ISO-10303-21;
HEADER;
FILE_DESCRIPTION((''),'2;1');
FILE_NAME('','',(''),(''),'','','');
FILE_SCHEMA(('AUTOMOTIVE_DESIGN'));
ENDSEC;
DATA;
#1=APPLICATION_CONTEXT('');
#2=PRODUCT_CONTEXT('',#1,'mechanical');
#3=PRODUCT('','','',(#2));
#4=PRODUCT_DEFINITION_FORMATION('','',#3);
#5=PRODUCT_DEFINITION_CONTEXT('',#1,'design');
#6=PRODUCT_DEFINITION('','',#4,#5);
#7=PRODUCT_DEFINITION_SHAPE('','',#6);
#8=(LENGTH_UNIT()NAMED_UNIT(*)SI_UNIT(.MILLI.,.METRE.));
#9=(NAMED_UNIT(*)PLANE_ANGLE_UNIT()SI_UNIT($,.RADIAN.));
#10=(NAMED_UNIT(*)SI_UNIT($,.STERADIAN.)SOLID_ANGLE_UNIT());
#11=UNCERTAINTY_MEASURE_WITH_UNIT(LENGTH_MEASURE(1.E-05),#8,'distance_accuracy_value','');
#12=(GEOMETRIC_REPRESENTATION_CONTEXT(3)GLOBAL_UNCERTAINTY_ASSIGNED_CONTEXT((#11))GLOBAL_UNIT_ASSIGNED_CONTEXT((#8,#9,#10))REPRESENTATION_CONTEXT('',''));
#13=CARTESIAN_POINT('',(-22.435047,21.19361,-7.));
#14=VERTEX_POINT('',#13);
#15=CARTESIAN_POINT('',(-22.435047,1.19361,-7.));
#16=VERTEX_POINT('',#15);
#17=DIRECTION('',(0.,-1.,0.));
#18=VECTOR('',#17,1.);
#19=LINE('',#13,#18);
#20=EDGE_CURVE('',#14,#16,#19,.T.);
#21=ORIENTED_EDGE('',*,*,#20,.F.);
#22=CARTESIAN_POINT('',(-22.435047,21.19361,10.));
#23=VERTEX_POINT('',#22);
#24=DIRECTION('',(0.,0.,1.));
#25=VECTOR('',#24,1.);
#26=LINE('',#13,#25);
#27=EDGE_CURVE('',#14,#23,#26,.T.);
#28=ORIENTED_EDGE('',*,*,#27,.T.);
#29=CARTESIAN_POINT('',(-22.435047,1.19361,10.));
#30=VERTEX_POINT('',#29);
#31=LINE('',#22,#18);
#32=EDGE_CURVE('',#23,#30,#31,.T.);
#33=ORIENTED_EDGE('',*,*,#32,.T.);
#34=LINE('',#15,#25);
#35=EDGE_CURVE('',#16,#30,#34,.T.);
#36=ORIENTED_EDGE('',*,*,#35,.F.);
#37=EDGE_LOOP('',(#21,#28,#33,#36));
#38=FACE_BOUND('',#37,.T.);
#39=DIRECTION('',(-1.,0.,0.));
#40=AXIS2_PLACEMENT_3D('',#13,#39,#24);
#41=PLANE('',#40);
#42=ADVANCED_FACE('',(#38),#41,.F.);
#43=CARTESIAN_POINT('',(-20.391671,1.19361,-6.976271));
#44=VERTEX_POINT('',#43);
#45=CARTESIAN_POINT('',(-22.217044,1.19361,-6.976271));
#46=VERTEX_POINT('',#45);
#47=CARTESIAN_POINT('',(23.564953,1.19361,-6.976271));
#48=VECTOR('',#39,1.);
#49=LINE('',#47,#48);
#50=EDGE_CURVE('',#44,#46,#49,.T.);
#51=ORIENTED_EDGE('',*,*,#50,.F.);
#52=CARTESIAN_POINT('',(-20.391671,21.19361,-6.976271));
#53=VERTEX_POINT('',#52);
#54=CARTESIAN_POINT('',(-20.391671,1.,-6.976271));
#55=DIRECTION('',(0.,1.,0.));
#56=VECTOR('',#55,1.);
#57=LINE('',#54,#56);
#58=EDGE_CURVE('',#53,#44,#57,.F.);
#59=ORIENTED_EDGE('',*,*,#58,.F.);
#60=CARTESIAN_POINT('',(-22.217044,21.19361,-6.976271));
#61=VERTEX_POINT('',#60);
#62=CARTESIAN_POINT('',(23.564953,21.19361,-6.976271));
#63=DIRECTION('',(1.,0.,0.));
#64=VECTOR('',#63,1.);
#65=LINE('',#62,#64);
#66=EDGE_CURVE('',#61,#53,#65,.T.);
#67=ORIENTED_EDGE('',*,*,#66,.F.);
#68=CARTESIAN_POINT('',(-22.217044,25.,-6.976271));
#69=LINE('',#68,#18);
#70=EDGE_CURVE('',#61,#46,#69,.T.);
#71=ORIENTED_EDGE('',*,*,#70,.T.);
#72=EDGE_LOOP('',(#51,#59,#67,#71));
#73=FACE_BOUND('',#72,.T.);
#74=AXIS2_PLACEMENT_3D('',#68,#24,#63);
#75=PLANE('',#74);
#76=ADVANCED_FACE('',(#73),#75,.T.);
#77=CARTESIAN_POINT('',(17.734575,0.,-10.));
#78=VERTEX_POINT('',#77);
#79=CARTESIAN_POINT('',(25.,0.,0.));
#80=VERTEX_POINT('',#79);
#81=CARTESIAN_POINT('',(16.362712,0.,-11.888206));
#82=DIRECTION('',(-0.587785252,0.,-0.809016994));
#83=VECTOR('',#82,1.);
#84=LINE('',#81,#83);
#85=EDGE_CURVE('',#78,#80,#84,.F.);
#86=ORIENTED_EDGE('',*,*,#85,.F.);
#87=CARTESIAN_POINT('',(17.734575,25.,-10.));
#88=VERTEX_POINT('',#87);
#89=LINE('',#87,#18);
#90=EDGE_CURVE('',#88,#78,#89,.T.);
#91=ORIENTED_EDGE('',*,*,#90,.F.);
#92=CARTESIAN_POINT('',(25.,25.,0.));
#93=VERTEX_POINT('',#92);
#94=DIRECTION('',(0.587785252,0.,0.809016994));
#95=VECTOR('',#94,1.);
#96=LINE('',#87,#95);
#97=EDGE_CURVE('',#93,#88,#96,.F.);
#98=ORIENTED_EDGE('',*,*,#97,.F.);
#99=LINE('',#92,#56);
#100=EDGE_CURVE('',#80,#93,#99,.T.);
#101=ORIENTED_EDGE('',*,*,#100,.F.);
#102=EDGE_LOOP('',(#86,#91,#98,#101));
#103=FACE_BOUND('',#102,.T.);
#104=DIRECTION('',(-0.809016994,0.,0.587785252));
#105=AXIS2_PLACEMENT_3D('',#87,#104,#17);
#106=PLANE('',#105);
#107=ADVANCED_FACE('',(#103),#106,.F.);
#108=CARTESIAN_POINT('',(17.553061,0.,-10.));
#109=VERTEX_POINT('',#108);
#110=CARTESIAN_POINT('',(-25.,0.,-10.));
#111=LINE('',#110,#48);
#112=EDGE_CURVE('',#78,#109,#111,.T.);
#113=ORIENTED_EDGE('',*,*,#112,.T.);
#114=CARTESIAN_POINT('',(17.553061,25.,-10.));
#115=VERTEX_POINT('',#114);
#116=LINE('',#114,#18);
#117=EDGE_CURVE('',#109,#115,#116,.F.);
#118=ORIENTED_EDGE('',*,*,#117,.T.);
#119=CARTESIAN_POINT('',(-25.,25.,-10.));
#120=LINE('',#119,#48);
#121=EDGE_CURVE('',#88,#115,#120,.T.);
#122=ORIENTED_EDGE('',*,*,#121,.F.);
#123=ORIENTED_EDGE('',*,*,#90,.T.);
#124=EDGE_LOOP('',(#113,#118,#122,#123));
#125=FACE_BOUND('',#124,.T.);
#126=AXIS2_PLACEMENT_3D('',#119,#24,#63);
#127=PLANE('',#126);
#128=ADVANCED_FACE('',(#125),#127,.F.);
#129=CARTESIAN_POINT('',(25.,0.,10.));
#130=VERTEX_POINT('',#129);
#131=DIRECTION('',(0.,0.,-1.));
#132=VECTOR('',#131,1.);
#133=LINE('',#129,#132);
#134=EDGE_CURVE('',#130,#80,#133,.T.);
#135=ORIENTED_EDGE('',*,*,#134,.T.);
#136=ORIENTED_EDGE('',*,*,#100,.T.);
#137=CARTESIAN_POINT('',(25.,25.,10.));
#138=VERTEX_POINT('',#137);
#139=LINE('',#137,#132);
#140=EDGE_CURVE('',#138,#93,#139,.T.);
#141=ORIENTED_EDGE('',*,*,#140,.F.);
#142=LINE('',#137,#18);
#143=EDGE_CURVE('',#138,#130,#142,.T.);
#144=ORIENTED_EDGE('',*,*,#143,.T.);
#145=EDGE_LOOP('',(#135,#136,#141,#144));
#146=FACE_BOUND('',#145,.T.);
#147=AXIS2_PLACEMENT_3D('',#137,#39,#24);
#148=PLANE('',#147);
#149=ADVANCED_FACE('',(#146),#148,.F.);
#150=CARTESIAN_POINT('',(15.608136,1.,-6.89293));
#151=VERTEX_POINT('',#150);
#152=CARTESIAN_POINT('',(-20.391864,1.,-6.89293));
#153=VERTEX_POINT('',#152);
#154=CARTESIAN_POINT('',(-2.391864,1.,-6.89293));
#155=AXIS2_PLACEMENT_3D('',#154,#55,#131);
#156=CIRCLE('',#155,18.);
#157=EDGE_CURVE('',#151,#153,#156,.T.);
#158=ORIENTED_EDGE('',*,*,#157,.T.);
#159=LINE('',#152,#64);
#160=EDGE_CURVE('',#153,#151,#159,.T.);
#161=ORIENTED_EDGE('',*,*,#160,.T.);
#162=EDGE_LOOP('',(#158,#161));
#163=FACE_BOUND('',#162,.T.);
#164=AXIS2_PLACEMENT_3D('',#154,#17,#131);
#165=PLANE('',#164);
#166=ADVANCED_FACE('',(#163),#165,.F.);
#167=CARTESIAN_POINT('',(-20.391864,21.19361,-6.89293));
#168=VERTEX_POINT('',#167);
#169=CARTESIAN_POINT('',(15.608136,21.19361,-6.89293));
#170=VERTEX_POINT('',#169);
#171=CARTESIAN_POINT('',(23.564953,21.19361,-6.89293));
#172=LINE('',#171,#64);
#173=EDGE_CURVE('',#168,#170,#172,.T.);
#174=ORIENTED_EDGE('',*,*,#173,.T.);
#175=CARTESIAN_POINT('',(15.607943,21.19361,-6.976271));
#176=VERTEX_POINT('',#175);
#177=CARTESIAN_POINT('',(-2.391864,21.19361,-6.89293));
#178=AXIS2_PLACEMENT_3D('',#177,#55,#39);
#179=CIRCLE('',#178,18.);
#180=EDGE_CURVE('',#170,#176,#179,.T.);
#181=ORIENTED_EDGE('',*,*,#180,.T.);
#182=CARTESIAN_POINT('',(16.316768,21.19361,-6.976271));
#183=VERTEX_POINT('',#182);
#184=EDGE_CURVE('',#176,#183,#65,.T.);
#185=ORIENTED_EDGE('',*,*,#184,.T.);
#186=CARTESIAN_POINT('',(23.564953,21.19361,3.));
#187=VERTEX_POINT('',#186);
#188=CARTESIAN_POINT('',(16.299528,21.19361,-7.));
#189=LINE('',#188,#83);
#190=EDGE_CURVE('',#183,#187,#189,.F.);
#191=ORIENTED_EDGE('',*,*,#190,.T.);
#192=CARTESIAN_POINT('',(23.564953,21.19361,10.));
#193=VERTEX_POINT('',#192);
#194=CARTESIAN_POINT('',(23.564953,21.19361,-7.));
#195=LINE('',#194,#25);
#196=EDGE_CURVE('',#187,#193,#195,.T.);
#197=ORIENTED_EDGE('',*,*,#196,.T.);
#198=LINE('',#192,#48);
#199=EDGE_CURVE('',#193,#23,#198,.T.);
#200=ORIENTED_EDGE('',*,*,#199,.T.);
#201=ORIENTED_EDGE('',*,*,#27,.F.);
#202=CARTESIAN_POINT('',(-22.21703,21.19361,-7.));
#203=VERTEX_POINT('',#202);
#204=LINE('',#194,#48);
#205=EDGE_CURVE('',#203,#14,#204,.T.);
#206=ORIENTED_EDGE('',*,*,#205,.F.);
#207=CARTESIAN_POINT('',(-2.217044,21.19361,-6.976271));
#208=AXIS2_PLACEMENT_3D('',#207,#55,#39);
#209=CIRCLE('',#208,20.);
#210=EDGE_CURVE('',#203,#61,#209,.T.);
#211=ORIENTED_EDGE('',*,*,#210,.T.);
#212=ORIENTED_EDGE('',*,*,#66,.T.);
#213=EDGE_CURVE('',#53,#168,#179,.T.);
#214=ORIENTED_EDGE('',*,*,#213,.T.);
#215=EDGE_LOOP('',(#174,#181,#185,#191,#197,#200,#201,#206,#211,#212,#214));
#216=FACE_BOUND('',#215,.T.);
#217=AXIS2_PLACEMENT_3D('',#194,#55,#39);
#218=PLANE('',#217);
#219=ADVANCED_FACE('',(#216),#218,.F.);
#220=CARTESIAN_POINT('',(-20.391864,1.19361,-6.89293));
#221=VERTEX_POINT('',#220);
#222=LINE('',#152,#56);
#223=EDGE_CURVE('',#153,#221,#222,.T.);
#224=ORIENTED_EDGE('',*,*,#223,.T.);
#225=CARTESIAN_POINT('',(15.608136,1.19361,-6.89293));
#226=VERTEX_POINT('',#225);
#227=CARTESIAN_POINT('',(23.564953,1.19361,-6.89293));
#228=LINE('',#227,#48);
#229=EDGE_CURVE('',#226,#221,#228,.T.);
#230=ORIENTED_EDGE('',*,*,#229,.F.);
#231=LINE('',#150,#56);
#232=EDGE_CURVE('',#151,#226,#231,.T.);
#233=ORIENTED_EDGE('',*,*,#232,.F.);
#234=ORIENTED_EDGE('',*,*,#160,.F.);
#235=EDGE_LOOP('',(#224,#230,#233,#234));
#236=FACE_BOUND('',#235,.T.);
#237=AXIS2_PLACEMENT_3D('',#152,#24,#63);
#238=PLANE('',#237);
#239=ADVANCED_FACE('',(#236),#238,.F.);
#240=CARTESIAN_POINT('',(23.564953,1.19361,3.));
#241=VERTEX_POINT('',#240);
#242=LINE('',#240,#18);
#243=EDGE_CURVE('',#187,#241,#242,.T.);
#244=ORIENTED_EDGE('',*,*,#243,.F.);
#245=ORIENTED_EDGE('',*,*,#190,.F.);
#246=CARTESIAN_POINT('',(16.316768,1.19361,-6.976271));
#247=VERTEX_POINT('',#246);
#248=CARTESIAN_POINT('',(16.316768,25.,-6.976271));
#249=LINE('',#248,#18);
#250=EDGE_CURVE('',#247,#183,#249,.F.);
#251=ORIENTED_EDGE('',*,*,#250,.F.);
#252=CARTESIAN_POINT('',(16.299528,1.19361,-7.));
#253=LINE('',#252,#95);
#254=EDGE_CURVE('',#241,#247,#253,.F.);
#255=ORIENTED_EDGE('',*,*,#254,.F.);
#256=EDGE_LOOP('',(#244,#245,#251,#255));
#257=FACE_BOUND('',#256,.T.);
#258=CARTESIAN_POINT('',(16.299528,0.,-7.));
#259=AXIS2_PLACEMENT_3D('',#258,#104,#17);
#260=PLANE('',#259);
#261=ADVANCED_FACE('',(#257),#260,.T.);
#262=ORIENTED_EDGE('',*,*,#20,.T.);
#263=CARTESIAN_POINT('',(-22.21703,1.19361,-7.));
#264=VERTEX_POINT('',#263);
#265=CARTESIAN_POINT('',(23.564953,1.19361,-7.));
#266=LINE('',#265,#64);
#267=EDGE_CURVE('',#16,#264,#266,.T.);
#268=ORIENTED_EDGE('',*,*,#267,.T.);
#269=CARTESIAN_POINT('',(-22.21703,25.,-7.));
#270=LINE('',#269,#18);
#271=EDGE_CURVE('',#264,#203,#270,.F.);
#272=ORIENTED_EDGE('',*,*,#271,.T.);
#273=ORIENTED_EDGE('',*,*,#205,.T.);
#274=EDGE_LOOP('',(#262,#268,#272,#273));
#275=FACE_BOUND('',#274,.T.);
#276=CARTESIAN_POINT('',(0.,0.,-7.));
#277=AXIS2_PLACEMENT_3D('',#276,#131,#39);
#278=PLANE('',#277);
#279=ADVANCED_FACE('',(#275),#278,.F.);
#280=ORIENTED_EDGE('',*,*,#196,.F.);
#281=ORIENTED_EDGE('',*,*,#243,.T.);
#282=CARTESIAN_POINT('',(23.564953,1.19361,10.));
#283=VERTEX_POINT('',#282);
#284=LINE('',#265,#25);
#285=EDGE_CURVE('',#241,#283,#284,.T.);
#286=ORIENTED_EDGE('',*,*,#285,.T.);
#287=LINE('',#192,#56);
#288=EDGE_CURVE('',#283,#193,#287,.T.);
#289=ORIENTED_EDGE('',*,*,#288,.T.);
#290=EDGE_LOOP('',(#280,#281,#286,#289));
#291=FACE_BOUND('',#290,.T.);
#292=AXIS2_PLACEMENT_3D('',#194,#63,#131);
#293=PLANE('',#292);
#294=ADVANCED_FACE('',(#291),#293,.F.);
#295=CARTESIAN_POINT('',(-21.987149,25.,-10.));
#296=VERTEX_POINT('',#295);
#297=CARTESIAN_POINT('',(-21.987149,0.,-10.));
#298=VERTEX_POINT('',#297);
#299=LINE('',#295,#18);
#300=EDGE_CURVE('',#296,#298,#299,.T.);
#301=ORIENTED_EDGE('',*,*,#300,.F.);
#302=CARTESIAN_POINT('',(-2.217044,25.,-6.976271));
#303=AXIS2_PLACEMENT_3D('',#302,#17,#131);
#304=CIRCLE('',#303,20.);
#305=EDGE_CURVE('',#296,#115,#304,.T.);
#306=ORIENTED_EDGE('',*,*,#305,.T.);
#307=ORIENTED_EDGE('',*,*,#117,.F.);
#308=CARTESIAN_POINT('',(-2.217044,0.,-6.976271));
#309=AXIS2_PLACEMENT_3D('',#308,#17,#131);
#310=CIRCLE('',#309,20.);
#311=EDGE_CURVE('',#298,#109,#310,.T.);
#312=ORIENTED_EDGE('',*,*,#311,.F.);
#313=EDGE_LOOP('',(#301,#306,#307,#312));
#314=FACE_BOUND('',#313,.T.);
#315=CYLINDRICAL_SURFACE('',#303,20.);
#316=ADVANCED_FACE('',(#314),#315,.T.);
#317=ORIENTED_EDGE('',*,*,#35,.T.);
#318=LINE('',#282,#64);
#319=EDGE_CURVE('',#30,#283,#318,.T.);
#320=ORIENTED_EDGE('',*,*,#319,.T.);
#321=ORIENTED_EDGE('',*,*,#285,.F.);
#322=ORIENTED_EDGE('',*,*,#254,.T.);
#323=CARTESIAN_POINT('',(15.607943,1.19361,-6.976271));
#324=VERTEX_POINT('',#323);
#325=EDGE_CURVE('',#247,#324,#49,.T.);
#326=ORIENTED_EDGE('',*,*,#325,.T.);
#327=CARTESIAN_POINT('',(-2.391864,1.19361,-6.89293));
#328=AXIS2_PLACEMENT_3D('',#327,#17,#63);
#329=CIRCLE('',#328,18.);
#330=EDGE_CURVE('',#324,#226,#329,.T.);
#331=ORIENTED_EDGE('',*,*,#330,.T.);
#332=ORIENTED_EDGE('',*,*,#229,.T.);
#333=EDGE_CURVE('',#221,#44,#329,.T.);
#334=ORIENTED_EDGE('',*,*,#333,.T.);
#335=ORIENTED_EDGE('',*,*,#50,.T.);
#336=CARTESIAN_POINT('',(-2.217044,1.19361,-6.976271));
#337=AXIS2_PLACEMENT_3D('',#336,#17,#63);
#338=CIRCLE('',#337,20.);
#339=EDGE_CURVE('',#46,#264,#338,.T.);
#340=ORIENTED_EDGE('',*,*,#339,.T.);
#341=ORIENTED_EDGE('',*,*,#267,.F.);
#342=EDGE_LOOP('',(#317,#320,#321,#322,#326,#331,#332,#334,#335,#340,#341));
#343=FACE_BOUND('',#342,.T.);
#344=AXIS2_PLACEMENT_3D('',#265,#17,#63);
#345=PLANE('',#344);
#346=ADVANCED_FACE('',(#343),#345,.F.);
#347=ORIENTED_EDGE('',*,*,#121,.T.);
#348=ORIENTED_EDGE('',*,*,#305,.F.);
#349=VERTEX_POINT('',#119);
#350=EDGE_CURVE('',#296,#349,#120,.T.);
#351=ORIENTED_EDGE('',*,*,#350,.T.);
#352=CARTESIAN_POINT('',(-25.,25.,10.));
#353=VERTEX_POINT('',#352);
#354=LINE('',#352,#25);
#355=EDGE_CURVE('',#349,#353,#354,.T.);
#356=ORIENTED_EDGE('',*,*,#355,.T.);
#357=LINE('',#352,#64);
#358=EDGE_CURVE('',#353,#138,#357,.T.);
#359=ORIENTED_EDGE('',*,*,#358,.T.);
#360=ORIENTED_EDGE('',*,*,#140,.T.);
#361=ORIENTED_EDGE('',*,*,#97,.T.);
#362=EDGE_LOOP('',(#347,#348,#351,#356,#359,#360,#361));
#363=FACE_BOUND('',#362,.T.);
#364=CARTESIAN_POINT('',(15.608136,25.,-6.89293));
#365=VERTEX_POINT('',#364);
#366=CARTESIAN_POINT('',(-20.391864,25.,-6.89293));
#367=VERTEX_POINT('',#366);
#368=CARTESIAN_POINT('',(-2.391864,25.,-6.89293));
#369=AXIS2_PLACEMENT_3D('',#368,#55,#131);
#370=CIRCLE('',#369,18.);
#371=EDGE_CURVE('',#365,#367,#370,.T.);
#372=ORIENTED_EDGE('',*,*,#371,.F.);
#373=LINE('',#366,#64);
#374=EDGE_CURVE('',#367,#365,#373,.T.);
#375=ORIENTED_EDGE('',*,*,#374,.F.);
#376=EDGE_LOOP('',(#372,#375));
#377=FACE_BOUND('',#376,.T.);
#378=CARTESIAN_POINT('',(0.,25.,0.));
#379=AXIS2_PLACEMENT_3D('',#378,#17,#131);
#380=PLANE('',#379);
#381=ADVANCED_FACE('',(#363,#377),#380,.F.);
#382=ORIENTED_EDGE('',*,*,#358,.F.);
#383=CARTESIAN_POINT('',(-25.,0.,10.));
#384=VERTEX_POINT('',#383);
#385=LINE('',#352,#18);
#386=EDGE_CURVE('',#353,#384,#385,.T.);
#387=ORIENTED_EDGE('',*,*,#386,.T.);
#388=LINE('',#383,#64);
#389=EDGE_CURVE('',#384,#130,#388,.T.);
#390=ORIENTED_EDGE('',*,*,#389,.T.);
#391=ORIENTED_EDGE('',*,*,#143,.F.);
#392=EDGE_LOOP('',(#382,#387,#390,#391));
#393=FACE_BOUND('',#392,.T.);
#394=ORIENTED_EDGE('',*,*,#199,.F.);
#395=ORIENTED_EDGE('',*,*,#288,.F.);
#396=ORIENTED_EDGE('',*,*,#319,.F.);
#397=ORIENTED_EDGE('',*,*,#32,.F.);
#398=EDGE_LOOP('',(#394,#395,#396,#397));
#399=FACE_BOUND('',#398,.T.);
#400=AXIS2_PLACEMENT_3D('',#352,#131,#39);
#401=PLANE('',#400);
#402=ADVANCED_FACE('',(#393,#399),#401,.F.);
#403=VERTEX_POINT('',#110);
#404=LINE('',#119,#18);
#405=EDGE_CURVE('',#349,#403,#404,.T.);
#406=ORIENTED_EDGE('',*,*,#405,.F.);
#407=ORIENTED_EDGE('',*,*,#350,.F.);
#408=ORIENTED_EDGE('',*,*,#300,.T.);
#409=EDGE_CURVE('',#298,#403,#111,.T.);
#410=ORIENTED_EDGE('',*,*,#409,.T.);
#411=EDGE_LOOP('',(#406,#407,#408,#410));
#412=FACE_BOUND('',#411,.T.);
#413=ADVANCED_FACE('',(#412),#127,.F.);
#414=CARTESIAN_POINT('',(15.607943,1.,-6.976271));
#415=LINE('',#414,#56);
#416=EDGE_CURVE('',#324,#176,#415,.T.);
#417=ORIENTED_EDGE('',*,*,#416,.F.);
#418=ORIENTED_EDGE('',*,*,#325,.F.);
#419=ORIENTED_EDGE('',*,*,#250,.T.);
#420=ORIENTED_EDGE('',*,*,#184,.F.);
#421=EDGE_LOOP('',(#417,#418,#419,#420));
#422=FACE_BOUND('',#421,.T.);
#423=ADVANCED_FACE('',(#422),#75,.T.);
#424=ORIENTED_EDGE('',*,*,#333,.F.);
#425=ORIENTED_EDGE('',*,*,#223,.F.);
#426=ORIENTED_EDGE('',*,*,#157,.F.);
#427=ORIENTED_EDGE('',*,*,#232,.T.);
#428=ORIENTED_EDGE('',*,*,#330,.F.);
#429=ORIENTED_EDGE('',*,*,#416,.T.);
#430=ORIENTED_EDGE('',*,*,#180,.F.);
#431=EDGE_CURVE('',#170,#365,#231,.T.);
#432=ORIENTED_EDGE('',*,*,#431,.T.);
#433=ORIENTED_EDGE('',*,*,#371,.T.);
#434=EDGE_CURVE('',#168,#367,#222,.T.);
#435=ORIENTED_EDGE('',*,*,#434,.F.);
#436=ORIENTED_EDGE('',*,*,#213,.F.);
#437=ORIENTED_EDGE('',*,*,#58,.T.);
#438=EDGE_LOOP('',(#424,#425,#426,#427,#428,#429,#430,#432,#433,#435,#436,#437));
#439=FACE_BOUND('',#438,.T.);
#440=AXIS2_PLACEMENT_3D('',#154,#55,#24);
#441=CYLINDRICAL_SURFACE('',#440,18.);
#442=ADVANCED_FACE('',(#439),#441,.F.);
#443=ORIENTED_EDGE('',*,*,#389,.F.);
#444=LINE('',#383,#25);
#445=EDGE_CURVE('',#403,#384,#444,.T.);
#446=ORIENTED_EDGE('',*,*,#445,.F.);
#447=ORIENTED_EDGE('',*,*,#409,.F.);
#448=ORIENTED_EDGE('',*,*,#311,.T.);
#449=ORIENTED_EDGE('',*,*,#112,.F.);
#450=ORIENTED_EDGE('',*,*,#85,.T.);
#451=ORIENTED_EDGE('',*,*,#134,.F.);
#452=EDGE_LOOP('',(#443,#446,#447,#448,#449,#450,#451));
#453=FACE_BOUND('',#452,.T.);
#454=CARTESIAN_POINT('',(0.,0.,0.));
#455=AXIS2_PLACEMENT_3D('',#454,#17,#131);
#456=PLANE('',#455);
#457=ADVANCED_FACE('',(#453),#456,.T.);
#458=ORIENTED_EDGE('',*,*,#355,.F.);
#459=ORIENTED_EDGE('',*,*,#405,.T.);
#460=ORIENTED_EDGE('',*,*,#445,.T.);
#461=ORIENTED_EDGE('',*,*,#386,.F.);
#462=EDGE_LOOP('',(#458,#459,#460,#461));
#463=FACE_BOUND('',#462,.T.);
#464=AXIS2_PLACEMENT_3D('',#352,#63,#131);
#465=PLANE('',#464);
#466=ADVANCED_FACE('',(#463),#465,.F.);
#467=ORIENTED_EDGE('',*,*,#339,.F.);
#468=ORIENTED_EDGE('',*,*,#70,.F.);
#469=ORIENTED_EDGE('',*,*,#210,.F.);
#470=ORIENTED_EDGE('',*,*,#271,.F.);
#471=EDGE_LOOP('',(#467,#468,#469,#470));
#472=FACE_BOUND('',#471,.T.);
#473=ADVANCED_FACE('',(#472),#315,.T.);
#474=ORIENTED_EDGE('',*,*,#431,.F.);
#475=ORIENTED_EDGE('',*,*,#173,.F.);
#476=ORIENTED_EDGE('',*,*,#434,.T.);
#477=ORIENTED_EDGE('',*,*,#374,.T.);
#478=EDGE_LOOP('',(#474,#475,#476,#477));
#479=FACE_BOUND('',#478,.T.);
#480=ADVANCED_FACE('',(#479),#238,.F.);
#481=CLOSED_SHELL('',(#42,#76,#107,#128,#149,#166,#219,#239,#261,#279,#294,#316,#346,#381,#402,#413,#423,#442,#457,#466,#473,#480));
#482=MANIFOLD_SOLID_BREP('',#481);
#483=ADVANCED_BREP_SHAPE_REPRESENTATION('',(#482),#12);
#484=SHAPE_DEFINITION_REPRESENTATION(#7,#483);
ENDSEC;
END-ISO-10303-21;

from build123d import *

# Parameters (mm, degrees)
CROQUIS1_W              = 50
CROQUIS1_H              = 20
SALIENTE_EXTRUIR1_DEPTH = 25
CROQUIS5_W              = 46
CROQUIS5_H              = 20
CORTAR_EXTRUIR1_DEPTH   = 17
SALIENTE_EXTRUIR2_DEPTH = 25
CORTAR_EXTRUIR5_DEPTH   = 24
CHAFL_N2_SIZE           = 10
CHAFL_N2_SIZE_2         = 7.26542528


with BuildPart() as part:
    # Croquis1 → Saliente-Extruir1 (new body)
    with BuildSketch(Plane(origin=(0, 0, 0), x_dir=(1, 0, 0), z_dir=(0, 1, 0))):
        Rectangle(CROQUIS1_W, CROQUIS1_H)
    extrude(amount=SALIENTE_EXTRUIR1_DEPTH)

    # Croquis5 → Cortar-Extruir1 (cut)
    with BuildSketch(Plane(origin=(0, 2.566177554, 10), x_dir=(1, 0, 0), z_dir=(0, 0, 1))):
        with Locations((0.564953321, 8.627432653)):
            Rectangle(CROQUIS5_W, CROQUIS5_H)
    extrude(amount=-CORTAR_EXTRUIR1_DEPTH, mode=Mode.SUBTRACT)

    # Croquis6 → Saliente-Extruir2 (add)
    with BuildSketch(Plane.XZ):
        with BuildLine():
            Line((-22.217043892, -6.976270562), (17.782956108, -6.976270562))
            ThreePointArc((17.782956108, -6.976270562), (-2.217043892, -26.976270562), (-22.217043892, -6.976270562))
        make_face()
    extrude(amount=-SALIENTE_EXTRUIR2_DEPTH)

    # Croquis11 → Cortar-Extruir5 (cut)
    with BuildSketch(Plane(origin=(0, 25, 0), x_dir=(1, 0, 0), z_dir=(0, 1, 0))):
        with BuildLine():
            Line((-20.391864193, 6.892929863), (15.608135807, 6.892929863))
            ThreePointArc((15.608135807, 6.892929863), (-2.391864193, 24.892929863), (-20.391864193, 6.892929863))
        make_face()
    extrude(amount=-CORTAR_EXTRUIR5_DEPTH, mode=Mode.SUBTRACT)

    # Chaflán2
    # the kernel refuses this chamfer: 10, 7.26542528 mm, written as the material it adds along each edge
    with BuildSketch(Plane(origin=(23.564953321, 1.193610207, -7), x_dir=(0.022768510603911864, 0, 0.9997407638607518), z_dir=(0, 1, 0))) as chafl_n2_piece_1:
        Polygon((CHAFL_N2_SIZE * 0.999740763861, -CHAFL_N2_SIZE * 0.0227685106039), (-CHAFL_N2_SIZE_2 * 0.0227685106041, -CHAFL_N2_SIZE_2 * 0.999740763868), (0, 0), align=None)
    extrude(amount=20)
    # the kernel refuses this chamfer: 10, 7.26542528 mm, written as the material it takes off along each edge
    with BuildSketch(Plane(origin=(25, -25.815709359, -10), x_dir=(0.022768510603911864, 0, 0.9997407638607518), z_dir=(0, 1, 0))) as chafl_n2_2_piece_1:
        Polygon((CHAFL_N2_SIZE * 0.999740763861, -CHAFL_N2_SIZE * 0.0227685106039), (-CHAFL_N2_SIZE_2 * 0.0227685106041, -CHAFL_N2_SIZE_2 * 0.999740763868), (0, 0), align=None)
    extrude(amount=76.631418718, mode=Mode.SUBTRACT)


solid = part.part
